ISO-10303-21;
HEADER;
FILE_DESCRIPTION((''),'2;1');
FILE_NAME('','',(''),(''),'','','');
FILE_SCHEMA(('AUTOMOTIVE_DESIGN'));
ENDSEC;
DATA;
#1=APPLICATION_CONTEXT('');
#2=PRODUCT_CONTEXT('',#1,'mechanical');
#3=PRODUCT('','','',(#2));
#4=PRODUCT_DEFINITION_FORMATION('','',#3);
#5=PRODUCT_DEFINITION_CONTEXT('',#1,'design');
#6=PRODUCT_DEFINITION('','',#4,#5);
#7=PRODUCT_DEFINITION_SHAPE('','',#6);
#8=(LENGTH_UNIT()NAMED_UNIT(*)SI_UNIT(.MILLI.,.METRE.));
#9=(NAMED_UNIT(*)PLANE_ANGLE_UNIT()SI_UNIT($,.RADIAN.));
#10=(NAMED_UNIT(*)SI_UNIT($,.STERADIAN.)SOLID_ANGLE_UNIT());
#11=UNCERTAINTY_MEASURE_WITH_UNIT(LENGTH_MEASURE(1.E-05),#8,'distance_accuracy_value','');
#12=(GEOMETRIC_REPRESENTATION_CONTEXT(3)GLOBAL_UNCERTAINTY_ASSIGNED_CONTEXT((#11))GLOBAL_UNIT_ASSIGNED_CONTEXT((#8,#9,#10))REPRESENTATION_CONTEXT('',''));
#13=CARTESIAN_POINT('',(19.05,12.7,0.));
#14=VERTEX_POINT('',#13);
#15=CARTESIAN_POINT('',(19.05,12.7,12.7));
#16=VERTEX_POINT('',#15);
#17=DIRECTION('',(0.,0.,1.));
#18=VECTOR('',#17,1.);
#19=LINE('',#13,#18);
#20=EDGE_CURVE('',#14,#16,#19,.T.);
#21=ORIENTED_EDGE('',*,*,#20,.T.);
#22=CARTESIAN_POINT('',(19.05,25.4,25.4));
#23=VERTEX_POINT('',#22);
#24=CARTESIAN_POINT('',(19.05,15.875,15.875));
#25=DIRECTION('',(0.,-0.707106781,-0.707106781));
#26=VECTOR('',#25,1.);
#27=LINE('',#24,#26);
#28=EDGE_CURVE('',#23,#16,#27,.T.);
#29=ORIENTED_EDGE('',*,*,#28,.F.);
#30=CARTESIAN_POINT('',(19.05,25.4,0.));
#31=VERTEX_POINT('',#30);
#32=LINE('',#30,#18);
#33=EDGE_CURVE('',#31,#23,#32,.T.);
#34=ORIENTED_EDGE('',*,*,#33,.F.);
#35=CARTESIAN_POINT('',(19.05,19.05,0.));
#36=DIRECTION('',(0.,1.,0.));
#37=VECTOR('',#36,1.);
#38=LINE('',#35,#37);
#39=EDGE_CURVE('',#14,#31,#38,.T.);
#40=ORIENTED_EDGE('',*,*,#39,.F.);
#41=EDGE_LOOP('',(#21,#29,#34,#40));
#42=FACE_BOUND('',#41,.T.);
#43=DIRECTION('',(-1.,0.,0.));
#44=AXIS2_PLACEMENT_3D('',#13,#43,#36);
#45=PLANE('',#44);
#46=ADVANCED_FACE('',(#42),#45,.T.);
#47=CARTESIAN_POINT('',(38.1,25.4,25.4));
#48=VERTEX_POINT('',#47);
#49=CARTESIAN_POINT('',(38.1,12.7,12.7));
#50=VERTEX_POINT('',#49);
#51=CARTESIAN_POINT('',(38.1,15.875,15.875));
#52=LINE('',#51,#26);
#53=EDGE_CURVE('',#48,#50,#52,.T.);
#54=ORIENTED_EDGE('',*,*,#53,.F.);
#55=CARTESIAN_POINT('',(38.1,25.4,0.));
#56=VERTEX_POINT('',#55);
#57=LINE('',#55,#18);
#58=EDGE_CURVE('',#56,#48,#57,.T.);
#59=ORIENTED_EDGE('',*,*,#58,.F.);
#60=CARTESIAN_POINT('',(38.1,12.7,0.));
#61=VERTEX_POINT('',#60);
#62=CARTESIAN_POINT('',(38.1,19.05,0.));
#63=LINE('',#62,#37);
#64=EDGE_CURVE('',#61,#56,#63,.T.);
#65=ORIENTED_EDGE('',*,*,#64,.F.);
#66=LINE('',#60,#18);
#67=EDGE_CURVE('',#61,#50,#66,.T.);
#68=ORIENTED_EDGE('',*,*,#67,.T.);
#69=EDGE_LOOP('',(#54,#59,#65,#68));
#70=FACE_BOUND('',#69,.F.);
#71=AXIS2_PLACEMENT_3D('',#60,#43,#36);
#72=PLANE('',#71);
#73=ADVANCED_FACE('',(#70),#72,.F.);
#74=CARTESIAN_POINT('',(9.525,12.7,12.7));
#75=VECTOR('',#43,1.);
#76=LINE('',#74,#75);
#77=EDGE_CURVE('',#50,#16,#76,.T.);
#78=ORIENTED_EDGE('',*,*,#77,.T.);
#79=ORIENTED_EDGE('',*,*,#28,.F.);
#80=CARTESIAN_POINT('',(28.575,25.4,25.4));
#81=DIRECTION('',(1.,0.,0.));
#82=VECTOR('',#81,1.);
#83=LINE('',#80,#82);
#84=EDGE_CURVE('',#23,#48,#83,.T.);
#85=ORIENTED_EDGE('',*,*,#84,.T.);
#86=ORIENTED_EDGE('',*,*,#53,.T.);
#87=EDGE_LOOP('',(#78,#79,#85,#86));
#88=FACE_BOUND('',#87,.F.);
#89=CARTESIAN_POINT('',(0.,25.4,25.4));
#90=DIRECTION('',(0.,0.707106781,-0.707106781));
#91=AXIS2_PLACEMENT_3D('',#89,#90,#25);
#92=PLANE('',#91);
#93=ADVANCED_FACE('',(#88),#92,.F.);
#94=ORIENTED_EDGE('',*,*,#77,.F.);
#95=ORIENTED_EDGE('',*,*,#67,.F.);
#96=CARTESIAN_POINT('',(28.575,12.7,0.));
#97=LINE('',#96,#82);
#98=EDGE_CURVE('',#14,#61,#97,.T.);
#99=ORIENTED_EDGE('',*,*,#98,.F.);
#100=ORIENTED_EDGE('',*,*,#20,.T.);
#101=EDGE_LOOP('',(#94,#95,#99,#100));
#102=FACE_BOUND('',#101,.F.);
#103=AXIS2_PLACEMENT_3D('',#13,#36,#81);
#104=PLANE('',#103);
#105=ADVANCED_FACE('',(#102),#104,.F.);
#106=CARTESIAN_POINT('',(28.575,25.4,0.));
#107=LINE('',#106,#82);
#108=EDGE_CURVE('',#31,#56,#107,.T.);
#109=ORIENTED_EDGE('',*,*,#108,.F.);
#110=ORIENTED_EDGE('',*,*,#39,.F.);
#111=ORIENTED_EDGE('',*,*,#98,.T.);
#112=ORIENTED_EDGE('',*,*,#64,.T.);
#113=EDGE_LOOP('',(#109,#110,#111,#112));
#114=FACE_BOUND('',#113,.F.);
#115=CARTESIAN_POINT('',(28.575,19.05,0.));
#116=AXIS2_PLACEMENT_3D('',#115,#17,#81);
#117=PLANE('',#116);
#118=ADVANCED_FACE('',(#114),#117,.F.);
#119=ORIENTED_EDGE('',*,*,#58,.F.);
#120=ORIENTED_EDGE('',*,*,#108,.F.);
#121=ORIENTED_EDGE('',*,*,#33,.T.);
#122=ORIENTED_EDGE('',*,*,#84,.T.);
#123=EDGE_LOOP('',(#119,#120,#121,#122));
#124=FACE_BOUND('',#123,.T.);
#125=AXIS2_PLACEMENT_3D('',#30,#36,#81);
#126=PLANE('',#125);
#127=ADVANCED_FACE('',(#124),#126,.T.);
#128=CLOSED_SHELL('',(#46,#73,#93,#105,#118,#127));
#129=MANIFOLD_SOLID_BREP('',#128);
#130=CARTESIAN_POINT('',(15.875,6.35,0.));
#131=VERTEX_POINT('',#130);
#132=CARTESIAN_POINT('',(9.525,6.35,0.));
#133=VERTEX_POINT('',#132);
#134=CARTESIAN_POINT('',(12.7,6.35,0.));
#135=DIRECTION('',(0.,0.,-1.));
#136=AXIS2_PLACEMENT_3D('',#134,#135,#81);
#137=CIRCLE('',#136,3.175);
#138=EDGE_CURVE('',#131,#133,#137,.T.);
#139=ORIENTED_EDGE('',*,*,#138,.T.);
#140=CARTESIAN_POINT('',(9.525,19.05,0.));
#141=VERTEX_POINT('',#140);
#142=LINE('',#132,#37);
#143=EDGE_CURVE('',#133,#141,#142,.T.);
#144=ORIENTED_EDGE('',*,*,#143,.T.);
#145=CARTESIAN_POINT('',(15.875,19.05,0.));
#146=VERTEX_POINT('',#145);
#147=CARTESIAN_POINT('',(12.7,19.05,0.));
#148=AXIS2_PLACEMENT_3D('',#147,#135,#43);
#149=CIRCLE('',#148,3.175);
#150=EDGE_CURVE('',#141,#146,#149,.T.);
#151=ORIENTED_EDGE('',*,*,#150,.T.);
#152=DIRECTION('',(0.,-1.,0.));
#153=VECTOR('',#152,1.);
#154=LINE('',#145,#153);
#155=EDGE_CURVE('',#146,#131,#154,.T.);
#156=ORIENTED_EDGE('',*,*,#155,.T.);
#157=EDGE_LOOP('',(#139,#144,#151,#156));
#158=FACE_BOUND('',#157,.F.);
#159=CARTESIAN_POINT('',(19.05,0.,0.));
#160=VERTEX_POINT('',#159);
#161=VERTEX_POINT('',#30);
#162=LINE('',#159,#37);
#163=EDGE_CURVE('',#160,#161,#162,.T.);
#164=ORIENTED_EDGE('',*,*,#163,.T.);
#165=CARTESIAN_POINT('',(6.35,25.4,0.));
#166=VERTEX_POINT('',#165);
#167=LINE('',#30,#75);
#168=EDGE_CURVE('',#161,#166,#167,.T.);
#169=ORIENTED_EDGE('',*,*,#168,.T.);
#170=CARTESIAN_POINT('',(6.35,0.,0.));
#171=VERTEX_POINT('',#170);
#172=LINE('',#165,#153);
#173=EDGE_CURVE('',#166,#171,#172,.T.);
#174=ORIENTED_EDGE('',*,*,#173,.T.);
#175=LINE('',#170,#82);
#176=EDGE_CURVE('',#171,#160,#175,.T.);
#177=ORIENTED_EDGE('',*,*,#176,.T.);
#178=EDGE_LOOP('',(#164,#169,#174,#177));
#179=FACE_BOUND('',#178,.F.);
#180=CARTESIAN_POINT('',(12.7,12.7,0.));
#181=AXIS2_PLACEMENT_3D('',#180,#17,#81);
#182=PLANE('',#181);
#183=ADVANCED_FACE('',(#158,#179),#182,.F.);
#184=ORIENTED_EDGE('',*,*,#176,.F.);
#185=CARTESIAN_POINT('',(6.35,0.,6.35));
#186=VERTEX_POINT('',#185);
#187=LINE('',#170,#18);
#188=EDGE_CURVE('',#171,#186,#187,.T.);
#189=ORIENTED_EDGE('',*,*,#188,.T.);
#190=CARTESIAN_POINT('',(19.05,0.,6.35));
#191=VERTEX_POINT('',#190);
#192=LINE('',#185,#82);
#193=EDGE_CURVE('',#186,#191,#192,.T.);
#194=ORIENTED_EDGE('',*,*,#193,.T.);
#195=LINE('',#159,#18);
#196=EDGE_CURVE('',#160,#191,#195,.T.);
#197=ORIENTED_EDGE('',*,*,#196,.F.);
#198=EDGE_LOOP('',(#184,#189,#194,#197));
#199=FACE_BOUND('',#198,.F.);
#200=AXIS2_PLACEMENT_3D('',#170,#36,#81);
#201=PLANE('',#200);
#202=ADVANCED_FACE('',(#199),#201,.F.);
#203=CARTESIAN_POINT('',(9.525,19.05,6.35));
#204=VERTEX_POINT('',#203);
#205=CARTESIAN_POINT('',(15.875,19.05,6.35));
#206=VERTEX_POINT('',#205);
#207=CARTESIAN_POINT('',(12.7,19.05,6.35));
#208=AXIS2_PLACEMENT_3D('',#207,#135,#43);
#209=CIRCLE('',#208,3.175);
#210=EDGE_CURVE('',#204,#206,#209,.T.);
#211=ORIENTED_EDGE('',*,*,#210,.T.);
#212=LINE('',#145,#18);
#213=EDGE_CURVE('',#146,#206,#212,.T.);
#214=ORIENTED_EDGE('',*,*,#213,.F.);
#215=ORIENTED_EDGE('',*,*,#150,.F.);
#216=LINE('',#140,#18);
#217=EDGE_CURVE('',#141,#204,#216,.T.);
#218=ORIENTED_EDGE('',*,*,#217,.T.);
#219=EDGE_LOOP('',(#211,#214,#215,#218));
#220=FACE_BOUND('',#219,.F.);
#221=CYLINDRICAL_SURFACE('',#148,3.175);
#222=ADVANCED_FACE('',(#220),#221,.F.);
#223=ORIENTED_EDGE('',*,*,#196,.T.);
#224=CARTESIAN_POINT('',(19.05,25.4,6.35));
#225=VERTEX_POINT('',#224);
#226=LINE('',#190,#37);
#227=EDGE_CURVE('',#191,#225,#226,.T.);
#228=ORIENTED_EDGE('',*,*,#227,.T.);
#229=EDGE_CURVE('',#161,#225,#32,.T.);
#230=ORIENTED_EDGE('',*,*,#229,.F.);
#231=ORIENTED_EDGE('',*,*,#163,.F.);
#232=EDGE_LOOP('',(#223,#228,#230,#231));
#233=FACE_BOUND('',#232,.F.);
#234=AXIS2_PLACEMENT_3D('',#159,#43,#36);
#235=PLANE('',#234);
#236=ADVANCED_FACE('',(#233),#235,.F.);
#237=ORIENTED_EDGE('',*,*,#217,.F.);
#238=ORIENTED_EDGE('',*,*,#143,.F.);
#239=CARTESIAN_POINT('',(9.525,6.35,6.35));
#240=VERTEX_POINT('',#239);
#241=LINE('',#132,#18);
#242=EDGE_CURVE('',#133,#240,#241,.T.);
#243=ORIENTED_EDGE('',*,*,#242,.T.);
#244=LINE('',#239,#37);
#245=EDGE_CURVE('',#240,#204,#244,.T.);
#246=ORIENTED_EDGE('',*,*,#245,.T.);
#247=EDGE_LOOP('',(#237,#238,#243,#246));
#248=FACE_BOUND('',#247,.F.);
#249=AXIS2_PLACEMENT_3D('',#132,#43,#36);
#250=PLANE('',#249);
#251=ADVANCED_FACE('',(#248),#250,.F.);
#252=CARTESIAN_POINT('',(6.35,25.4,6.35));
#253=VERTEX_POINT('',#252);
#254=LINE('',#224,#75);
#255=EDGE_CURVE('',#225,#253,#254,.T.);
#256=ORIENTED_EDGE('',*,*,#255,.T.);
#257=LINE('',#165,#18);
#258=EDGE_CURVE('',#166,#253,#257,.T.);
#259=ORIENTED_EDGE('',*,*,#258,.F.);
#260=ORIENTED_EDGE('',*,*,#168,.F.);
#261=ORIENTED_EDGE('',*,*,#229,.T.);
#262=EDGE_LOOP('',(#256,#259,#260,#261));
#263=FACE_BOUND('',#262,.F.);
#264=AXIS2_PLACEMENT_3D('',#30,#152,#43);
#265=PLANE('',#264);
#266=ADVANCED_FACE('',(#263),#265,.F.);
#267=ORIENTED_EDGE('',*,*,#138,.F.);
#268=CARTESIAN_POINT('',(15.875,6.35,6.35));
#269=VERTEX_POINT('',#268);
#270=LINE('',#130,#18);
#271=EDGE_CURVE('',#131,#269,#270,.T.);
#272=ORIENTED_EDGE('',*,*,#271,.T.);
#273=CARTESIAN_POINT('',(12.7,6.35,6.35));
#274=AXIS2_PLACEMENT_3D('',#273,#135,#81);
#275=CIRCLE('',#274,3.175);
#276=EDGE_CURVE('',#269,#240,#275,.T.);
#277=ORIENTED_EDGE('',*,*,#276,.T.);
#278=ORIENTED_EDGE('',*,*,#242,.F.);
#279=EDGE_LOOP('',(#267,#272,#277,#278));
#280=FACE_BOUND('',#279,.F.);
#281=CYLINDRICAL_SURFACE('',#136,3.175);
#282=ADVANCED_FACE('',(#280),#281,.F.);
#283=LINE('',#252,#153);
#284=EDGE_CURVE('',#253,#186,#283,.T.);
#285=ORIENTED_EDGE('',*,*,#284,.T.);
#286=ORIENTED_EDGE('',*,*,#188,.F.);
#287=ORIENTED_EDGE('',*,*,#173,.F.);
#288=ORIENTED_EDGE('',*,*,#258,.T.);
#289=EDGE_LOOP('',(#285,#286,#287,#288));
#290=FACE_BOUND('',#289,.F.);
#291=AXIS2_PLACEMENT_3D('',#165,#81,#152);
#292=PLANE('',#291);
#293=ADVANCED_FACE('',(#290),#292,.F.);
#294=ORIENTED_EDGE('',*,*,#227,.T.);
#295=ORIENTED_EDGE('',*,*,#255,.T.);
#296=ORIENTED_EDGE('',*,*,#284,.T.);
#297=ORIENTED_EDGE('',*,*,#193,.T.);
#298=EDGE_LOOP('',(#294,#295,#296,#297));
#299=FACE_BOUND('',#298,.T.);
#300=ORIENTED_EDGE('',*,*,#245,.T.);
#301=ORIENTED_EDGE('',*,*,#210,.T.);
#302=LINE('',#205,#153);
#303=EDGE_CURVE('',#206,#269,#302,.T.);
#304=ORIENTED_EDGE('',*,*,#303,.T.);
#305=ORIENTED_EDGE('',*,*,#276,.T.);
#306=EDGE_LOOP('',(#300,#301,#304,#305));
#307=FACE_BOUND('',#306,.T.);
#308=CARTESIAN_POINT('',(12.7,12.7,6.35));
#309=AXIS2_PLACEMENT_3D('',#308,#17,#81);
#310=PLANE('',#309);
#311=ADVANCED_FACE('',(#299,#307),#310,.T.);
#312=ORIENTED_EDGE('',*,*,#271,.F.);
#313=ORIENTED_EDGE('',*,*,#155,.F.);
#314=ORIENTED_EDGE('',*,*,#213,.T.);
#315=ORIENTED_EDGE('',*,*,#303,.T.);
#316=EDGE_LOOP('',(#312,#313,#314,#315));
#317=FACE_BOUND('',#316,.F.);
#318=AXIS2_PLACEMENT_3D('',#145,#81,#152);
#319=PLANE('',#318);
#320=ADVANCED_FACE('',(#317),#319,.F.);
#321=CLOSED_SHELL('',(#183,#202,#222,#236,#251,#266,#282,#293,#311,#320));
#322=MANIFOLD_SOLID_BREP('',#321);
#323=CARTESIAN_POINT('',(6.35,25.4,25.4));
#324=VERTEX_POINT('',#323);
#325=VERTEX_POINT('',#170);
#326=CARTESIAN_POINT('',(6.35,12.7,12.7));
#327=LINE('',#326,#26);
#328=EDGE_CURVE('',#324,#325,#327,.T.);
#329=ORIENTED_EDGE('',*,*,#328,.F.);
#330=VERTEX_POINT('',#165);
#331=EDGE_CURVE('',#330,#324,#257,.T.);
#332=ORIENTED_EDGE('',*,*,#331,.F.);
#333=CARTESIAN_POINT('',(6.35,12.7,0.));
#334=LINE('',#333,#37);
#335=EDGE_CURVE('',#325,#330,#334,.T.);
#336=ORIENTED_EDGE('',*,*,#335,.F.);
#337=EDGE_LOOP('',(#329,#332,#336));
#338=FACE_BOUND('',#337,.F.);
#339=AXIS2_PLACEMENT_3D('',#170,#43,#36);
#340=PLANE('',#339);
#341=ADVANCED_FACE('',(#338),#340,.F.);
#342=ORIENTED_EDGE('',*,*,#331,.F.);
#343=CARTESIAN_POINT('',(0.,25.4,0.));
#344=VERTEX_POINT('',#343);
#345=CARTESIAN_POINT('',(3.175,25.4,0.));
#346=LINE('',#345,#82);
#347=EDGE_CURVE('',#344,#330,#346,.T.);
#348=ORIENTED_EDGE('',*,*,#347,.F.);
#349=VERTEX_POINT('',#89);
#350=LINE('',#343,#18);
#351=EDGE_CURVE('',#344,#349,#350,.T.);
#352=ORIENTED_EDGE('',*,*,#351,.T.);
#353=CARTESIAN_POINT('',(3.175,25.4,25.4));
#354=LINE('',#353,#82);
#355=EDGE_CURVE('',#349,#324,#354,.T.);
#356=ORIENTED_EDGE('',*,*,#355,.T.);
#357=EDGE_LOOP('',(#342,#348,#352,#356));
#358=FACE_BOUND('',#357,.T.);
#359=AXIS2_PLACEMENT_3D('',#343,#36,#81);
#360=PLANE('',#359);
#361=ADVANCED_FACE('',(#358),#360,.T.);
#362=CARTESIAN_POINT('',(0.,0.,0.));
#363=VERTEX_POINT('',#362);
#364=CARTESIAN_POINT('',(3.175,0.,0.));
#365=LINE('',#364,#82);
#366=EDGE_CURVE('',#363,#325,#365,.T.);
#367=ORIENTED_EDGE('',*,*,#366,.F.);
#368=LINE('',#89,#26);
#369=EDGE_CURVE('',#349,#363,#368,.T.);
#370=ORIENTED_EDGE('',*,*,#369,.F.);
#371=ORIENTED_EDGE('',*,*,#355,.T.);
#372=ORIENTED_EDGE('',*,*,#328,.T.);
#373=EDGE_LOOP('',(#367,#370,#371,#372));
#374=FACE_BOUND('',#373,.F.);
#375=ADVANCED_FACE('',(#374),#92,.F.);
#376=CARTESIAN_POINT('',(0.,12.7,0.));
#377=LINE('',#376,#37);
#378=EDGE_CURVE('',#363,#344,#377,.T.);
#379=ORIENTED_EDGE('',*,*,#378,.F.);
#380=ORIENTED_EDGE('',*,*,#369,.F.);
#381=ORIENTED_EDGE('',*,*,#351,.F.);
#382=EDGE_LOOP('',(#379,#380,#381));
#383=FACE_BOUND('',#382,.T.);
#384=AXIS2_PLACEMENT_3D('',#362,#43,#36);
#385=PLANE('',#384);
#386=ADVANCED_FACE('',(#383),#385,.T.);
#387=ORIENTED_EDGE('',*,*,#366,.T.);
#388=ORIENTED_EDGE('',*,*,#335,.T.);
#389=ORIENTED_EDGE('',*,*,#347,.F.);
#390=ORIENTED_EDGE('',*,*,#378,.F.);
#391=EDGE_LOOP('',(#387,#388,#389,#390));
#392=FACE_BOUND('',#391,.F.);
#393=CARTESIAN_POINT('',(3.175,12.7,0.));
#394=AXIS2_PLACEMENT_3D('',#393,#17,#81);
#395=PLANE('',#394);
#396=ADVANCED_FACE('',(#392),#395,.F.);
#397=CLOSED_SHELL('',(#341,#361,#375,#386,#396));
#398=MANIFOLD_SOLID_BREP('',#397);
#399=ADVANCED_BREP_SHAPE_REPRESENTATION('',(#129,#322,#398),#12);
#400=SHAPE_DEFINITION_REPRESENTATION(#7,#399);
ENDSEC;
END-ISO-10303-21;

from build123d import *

# Parameters (mm, degrees)
F0_W     = 6.35
F0_H     = 25.4
F1_DEPTH = 25.4
F0_W_2   = 19.05
F0_H_2   = 12.7
F2_DEPTH = 25.4
F3_DEPTH = 6.35
F5_DEPTH = 38.101


# Not quite as in the source:
# - a feature of the source that left no trace in its solid (it failed there, or was rolled back) is left out


with BuildPart() as f1:
    # F0 (on Top) → F1 (new body)
    with BuildSketch(Plane.XY):
        with Locations((3.175, 12.7)):
            Rectangle(F0_W, F0_H)
    extrude(amount=F1_DEPTH)


with BuildPart() as f2:
    # F0 (on Top) → F2 (new body)
    with BuildSketch(Plane.XY):
        with Locations((28.575, 19.05)):
            Rectangle(F0_W_2, F0_H_2)
    extrude(amount=F2_DEPTH)


with BuildPart() as f3:
    # F0 (on Top) → F3 (new body)
    with BuildSketch(Plane.XY):
        Polygon((6.35, 25.4), (6.35, 0), (19.05, 0), (19.05, 12.7), (19.05, 25.4), align=None)
        with BuildLine():
            Line((9.525, 6.35), (9.525, 19.05))
            ThreePointArc((9.525, 19.05), (12.7, 22.225), (15.875, 19.05))
            Line((15.875, 19.05), (15.875, 6.35))
            ThreePointArc((15.875, 6.35), (12.7, 3.175), (9.525, 6.35))
        make_face(mode=Mode.SUBTRACT)
    extrude(amount=F3_DEPTH)


with BuildPart() as f5_tool:
    # F4 (on face) → F5 (new body, through all)
    with BuildSketch(Plane(origin=(0, 0, 0), x_dir=(0, -1, 0), z_dir=(-1, 0, 0))):
        Polygon((0, 25.4), (-25.4, 25.4), (0, 0), align=None)
    extrude(amount=-F5_DEPTH)


with BuildPart() as f1_1:
    add(f1.part)

    # F5: cut by f5_tool
    add(f5_tool.part, mode=Mode.SUBTRACT)


with BuildPart() as f2_1:
    add(f2.part)

    # F5: cut by f5_tool
    add(f5_tool.part, mode=Mode.SUBTRACT)


solid = Compound([f3.part, f1_1.part, f2_1.part])
